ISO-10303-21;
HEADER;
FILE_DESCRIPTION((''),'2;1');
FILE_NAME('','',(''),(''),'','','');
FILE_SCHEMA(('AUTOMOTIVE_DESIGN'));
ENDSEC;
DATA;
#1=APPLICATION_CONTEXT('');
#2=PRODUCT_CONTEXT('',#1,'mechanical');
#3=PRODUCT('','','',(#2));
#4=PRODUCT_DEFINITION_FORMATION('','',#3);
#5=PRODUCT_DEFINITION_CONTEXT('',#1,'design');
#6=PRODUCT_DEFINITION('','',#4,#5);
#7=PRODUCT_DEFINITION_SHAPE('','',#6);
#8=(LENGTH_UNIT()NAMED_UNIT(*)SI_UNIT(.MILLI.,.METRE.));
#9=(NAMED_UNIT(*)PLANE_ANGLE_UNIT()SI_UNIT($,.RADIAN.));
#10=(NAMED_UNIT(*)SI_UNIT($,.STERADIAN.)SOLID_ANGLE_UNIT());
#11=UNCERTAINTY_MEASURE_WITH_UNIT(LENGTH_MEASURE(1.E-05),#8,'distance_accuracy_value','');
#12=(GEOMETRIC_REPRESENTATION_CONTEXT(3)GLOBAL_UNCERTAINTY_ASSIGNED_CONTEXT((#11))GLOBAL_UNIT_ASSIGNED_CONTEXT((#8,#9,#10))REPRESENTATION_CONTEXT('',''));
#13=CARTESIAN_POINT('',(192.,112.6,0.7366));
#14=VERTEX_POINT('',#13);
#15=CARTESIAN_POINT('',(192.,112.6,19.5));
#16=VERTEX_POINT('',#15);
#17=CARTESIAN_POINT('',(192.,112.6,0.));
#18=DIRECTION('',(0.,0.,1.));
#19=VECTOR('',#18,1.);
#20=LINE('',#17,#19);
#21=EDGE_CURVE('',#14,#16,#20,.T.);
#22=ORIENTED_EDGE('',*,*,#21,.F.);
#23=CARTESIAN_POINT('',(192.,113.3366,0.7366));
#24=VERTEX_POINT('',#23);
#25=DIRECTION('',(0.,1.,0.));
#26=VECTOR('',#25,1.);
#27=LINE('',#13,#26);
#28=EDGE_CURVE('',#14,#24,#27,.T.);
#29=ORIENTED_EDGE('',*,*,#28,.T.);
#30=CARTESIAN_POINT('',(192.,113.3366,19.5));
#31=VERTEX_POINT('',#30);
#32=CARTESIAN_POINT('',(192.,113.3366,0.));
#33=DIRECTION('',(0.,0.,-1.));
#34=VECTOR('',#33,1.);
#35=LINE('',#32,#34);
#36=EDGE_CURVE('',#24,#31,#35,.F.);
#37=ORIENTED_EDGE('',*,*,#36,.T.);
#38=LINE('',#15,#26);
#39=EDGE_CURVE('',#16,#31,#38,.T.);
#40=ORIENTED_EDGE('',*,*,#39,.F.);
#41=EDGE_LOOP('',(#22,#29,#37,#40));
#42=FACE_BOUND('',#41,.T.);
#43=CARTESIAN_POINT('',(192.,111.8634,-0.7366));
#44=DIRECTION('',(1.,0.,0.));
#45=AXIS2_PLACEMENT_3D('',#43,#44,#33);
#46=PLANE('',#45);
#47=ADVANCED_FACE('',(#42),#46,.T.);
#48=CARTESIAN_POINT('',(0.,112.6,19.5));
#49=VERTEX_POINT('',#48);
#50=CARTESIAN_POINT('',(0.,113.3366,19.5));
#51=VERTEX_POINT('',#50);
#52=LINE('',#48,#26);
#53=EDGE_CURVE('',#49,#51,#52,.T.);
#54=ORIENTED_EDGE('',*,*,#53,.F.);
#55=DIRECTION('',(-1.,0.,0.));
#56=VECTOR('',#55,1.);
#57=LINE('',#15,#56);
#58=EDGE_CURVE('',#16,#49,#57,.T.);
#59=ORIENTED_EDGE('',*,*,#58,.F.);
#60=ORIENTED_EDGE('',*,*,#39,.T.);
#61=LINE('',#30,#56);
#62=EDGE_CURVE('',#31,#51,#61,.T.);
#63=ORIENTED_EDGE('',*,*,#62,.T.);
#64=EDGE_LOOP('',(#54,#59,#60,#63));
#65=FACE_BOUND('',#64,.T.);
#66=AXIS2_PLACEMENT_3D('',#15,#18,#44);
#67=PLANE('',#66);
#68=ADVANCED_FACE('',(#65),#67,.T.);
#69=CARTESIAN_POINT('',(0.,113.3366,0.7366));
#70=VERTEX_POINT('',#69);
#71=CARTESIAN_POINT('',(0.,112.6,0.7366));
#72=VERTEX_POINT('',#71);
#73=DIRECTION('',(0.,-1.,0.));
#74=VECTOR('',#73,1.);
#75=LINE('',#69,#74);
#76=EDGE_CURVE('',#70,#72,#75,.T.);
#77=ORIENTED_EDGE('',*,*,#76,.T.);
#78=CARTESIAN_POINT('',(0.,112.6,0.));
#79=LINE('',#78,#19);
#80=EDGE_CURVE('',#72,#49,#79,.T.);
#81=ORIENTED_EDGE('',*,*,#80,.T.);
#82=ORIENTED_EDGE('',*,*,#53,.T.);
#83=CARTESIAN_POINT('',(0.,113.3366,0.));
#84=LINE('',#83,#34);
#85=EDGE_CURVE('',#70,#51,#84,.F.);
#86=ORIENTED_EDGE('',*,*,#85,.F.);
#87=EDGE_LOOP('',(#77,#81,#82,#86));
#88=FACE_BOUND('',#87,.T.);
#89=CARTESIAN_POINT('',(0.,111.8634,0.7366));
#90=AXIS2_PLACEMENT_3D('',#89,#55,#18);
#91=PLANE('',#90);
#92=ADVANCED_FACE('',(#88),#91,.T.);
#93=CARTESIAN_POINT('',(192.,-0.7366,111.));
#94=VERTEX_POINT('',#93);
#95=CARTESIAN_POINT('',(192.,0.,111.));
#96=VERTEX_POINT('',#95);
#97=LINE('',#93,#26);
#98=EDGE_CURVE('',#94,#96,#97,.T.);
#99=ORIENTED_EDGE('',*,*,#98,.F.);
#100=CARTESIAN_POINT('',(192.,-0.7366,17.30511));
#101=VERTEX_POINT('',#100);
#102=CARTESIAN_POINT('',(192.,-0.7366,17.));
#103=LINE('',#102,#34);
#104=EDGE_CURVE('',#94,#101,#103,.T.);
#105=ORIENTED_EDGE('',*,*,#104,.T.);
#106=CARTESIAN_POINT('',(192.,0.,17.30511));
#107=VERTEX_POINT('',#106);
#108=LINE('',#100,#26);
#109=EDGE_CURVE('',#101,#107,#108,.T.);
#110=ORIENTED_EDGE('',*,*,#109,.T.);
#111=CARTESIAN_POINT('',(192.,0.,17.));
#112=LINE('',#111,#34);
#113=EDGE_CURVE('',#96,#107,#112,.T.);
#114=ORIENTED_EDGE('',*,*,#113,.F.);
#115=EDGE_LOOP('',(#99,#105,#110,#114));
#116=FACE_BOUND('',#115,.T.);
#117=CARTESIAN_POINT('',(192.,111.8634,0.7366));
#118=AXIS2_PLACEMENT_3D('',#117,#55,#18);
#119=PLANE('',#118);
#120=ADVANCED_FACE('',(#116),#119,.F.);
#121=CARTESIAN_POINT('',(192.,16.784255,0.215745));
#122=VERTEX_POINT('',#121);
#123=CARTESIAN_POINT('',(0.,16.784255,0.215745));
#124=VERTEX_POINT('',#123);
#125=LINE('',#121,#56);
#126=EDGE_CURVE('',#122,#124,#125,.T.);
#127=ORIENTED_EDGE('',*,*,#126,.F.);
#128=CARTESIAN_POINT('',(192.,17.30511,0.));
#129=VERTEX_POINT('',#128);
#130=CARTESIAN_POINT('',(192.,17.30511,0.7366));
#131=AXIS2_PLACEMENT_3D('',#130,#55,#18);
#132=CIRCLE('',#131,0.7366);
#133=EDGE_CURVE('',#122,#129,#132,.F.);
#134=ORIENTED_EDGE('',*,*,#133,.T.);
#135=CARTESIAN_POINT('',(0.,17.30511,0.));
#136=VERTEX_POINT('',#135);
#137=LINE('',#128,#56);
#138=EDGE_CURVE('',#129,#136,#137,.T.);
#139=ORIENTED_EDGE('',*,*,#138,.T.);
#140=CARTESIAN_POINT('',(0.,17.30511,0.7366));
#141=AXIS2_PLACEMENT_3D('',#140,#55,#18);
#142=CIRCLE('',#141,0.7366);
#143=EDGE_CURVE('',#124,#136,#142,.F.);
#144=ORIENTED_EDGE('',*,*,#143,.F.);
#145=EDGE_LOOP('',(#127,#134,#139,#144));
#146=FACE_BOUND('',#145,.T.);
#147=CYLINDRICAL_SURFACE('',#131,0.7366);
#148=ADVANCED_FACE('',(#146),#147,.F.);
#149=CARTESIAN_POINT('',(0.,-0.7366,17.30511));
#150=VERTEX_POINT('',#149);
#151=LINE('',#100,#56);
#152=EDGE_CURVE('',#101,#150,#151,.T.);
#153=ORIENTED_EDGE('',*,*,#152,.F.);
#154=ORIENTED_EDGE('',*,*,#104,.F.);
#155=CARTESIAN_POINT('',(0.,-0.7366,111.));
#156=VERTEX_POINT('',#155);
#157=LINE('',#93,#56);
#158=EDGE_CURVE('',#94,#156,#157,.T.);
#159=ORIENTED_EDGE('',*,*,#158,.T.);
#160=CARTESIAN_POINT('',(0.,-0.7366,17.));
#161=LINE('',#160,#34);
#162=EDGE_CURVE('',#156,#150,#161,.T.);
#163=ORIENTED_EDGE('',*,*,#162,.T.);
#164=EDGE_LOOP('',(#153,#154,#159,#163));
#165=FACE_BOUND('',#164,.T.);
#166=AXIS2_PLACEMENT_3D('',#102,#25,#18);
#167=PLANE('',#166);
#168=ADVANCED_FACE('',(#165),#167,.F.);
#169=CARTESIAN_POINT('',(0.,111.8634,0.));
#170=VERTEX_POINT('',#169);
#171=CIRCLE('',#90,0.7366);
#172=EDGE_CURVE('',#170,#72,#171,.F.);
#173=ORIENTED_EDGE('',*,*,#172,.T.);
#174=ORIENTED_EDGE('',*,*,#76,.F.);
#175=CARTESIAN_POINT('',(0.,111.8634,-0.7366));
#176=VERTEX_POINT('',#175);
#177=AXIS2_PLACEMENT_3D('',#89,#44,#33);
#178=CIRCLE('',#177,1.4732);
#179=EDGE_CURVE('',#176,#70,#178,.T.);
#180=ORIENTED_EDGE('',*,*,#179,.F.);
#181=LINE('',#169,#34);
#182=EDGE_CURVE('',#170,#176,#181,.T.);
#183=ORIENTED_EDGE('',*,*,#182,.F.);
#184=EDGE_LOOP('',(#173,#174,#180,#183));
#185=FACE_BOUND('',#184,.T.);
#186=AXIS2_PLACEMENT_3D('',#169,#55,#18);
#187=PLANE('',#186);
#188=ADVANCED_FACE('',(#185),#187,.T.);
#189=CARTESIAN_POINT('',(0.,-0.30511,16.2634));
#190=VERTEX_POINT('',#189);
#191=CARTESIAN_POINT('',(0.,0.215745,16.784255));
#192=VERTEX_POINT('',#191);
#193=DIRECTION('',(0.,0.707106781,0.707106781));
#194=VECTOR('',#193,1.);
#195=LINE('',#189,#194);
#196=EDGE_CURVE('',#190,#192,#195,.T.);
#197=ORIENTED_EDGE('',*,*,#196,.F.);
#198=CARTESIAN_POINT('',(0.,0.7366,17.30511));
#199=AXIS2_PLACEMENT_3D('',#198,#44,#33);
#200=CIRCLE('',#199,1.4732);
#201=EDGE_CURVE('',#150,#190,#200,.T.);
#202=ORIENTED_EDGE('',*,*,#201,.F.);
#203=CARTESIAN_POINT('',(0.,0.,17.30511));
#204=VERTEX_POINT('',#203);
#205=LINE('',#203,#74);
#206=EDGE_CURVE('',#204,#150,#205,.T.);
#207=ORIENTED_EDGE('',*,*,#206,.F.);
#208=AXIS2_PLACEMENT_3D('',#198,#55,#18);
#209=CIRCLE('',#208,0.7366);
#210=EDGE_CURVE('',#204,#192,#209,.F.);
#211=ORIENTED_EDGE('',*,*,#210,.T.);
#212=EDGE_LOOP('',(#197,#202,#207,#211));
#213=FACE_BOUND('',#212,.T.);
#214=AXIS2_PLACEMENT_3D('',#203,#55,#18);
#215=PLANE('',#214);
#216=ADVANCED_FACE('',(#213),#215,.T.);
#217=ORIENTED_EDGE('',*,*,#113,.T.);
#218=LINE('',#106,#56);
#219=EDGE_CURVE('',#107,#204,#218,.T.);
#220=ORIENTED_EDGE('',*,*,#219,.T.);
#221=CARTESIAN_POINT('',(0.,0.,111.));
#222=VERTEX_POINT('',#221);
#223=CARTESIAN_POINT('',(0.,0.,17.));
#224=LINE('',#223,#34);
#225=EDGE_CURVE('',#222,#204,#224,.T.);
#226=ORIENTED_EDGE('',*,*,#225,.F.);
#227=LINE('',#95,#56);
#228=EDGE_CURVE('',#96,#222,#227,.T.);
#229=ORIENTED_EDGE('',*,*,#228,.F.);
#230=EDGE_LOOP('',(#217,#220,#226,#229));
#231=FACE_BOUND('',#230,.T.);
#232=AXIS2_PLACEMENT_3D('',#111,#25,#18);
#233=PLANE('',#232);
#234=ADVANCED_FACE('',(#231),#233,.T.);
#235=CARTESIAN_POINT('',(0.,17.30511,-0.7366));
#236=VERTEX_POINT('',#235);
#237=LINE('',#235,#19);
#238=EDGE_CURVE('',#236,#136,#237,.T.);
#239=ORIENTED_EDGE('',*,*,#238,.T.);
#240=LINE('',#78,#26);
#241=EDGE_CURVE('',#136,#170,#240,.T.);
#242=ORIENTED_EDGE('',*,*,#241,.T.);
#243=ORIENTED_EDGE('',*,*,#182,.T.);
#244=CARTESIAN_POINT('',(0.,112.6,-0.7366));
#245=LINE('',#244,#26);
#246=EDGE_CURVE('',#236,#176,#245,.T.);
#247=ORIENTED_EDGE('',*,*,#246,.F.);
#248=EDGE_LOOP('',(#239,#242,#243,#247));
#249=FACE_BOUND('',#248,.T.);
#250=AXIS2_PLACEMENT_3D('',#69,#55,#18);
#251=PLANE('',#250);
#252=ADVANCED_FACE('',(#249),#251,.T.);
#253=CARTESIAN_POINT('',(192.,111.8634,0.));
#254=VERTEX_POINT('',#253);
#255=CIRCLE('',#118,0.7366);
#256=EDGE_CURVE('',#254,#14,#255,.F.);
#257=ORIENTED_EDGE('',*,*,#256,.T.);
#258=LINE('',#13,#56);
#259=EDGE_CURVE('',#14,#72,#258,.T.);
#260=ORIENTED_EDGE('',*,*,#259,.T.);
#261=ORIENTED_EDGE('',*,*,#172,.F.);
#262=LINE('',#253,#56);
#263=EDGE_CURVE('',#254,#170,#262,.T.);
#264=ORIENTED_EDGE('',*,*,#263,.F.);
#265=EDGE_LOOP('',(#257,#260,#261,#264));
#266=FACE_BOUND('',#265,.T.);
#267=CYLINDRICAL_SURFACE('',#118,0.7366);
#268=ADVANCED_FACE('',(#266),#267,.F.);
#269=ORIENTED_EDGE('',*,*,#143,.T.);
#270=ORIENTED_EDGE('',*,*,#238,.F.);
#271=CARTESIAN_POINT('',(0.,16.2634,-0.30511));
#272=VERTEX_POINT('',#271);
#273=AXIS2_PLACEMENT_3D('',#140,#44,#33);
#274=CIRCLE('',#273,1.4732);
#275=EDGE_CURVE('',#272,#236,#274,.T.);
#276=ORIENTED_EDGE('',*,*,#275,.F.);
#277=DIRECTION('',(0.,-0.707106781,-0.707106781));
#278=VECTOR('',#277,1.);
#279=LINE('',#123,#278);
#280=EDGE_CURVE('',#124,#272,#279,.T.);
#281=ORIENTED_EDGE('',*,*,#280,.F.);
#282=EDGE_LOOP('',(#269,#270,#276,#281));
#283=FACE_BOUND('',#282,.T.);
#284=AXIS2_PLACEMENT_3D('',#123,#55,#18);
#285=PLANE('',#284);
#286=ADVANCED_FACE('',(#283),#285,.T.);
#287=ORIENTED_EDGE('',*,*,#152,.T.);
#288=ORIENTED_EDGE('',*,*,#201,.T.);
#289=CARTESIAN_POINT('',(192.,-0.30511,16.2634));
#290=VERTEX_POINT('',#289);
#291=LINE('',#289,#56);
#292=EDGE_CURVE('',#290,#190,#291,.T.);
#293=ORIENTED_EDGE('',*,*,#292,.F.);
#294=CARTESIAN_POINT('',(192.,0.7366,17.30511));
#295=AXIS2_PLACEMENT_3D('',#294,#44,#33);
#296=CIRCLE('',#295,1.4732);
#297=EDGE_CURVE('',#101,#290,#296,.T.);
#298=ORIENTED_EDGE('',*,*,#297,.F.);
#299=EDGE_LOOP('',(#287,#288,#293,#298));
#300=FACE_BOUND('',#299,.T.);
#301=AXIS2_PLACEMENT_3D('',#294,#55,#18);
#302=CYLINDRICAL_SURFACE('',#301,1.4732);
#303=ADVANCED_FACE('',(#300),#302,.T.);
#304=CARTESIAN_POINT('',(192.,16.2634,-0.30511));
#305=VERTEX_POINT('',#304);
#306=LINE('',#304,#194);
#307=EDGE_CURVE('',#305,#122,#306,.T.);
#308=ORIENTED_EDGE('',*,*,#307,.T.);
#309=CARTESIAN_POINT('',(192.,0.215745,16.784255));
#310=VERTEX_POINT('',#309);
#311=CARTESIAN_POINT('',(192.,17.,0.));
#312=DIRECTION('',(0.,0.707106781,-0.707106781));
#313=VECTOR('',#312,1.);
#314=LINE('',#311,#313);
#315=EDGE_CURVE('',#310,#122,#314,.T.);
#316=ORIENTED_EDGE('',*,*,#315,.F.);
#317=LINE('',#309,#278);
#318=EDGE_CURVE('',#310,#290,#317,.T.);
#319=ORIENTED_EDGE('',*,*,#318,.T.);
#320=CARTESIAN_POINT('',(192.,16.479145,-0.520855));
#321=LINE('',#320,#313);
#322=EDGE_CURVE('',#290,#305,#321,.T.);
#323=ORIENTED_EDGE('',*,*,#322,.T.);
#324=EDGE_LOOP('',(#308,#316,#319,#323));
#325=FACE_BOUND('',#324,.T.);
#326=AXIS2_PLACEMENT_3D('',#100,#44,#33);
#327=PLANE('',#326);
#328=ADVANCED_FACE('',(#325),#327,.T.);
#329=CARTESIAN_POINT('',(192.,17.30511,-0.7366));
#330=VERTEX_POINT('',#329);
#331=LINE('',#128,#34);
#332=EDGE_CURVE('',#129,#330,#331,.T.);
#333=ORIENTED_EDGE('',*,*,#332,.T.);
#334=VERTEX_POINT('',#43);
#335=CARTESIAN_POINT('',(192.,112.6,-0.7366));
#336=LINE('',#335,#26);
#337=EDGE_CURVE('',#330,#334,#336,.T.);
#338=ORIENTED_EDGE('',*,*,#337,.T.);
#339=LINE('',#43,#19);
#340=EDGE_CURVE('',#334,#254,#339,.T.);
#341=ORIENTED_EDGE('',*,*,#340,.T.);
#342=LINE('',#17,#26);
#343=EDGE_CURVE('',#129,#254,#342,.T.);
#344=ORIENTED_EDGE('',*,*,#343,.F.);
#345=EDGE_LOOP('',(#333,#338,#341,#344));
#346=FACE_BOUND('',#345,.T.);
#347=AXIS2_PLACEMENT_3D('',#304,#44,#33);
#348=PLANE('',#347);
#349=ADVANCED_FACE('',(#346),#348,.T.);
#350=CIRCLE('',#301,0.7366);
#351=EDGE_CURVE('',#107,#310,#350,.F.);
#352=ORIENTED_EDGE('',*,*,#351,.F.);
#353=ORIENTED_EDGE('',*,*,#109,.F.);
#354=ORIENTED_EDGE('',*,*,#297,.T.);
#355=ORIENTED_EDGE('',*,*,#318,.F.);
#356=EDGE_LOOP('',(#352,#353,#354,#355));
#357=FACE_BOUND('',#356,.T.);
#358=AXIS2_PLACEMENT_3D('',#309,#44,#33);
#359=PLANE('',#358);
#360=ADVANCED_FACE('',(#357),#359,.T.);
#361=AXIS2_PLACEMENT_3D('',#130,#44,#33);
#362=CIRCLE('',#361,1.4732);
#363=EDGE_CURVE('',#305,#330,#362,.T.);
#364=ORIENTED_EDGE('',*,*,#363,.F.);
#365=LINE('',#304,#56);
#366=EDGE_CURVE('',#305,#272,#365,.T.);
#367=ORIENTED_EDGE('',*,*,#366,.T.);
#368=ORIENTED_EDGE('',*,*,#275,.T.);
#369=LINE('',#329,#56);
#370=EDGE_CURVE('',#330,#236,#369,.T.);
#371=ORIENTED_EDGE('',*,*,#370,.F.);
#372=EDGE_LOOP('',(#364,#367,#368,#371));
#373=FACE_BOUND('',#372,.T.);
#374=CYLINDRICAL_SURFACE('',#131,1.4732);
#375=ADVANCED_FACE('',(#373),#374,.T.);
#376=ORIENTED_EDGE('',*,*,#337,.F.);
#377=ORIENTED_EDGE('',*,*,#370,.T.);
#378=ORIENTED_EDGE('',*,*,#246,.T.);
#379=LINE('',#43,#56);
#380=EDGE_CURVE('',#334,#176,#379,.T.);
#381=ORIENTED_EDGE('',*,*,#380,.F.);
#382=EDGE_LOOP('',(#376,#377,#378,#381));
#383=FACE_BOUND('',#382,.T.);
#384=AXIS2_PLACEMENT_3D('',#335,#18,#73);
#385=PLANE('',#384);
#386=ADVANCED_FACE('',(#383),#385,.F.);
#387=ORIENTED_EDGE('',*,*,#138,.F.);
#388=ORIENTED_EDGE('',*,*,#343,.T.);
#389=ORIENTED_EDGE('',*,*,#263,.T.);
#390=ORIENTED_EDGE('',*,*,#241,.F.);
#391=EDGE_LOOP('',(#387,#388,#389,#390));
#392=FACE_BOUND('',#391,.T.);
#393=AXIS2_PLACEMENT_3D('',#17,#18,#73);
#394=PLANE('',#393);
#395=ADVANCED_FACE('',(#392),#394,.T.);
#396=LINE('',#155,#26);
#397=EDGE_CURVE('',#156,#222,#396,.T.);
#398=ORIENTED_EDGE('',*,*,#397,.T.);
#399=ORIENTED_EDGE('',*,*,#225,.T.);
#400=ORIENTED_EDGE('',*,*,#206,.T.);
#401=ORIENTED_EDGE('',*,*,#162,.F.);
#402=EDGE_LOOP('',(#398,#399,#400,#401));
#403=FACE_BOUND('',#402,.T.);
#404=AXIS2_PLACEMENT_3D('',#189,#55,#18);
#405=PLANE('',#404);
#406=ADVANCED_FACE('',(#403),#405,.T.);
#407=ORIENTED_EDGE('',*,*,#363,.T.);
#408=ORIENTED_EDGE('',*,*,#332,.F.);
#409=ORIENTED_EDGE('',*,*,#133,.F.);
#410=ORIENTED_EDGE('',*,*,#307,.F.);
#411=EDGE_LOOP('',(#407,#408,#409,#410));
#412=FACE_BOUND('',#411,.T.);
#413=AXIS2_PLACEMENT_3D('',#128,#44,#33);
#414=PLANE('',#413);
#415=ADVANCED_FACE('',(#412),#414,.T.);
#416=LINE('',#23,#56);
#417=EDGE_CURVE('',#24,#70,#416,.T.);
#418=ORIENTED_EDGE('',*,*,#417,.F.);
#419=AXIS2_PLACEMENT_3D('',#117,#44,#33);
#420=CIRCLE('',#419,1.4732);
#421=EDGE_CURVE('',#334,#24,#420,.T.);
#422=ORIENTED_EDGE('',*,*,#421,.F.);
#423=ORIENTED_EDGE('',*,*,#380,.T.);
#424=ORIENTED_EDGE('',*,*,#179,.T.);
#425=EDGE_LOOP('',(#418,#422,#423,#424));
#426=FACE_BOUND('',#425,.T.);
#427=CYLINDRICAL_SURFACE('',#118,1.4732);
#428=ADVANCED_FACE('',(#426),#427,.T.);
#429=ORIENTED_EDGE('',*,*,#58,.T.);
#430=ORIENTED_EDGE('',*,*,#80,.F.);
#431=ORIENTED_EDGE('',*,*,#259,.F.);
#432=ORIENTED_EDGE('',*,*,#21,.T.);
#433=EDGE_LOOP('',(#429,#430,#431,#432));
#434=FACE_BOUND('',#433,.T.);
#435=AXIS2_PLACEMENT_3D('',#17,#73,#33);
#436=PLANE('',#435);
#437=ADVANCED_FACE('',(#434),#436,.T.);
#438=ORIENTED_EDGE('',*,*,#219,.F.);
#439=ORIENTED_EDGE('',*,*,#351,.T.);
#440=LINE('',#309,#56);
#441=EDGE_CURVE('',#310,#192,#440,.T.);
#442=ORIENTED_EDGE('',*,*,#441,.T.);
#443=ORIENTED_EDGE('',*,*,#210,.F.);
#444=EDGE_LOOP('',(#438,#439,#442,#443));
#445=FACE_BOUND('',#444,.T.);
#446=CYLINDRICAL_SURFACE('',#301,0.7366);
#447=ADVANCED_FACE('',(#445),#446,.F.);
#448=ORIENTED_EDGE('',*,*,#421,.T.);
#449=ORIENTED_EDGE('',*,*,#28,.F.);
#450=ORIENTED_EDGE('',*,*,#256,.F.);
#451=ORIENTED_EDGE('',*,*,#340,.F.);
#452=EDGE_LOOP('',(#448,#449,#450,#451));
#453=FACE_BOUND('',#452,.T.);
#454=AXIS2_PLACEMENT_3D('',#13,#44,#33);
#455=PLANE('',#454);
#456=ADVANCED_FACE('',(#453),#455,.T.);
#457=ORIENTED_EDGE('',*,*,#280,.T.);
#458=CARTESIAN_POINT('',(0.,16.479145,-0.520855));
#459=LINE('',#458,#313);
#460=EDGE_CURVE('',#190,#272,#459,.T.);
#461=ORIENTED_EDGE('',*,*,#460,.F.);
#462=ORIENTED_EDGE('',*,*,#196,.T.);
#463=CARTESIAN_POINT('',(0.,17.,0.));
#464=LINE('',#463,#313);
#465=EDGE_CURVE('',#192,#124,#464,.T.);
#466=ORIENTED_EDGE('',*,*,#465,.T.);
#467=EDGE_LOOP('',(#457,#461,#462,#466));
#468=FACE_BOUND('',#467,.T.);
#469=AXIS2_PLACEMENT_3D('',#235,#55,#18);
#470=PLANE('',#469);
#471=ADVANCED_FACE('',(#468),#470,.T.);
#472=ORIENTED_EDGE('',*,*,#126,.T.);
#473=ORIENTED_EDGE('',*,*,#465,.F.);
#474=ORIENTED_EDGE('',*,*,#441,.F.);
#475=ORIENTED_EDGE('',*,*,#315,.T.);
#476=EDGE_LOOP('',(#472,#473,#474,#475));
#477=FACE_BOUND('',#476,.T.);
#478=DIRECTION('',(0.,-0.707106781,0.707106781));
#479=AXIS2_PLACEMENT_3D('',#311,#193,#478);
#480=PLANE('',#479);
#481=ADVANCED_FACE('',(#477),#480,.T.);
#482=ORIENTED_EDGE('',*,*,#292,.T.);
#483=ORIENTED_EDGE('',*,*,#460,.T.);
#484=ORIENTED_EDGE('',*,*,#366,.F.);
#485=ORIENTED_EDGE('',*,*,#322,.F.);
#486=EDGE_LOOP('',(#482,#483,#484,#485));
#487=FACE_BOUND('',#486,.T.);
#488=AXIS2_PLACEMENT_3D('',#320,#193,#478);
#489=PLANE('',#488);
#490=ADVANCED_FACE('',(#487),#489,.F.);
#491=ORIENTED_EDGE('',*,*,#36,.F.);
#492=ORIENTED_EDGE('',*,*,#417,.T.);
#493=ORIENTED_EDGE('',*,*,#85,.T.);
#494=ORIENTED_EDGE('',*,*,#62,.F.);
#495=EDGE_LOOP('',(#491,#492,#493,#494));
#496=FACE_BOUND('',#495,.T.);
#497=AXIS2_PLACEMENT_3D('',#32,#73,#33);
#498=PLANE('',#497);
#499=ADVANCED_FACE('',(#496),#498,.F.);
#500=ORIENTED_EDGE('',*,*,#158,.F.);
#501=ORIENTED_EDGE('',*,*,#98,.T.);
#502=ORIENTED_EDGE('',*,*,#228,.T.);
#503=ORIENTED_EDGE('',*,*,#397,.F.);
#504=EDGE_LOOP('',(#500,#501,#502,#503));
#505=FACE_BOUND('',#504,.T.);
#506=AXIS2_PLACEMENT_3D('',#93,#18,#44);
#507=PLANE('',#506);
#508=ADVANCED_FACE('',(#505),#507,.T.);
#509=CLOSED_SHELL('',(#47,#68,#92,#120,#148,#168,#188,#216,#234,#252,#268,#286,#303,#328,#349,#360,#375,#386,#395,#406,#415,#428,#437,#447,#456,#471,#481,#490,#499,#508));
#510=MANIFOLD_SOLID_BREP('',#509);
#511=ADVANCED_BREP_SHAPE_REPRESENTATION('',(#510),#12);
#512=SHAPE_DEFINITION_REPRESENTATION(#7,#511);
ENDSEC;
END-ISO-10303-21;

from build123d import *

# Parameters (mm, degrees)
SM_BASE_FLANGE_1_DEPTH = 192


# Sheet-metal steps are written as plain solids
with BuildPart() as part:
    # Sketch 1 → 基材-凸緣1 (new body)
    with BuildSketch(Plane(origin=(0, 0, 0), x_dir=(0, 0, -1), z_dir=(1, 0, 0))):
        with BuildLine():
            Line((-19.5, 112.6), (-0.7366, 112.6))
            ThreePointArc((-0.7366, 112.6), (-0.215745145, 112.384254855), (0, 111.8634))
            Line((0, 111.8634), (0, 17.30510971))
            ThreePointArc((0, 17.30510971), (-0.056070336, 17.023225094), (-0.215745145, 16.784254855))
            Line((-0.215745145, 16.784254855), (-16.784254855, 0.215745145))
            ThreePointArc((-16.784254855, 0.215745145), (-17.023225094, 0.056070336), (-17.30510971, 0))
            Line((-17.30510971, 0), (-111, 0))
            Line((-111, 0), (-111, -0.7366))
            Line((-111, -0.7366), (-17.30510971, -0.7366))
            ThreePointArc((-17.30510971, -0.7366), (-16.741340477, -0.624459327), (-16.2634, -0.30510971))
            Line((-16.2634, -0.30510971), (0.30510971, 16.2634))
            ThreePointArc((0.30510971, 16.2634), (0.624459327, 16.741340477), (0.7366, 17.30510971))
            Line((0.7366, 17.30510971), (0.7366, 111.8634))
            ThreePointArc((0.7366, 111.8634), (0.30510971, 112.90510971), (-0.7366, 113.3366))
            Line((-0.7366, 113.3366), (-19.5, 113.3366))
            Line((-19.5, 113.3366), (-19.5, 112.6))
        make_face()
    extrude(amount=SM_BASE_FLANGE_1_DEPTH)


solid = part.part
